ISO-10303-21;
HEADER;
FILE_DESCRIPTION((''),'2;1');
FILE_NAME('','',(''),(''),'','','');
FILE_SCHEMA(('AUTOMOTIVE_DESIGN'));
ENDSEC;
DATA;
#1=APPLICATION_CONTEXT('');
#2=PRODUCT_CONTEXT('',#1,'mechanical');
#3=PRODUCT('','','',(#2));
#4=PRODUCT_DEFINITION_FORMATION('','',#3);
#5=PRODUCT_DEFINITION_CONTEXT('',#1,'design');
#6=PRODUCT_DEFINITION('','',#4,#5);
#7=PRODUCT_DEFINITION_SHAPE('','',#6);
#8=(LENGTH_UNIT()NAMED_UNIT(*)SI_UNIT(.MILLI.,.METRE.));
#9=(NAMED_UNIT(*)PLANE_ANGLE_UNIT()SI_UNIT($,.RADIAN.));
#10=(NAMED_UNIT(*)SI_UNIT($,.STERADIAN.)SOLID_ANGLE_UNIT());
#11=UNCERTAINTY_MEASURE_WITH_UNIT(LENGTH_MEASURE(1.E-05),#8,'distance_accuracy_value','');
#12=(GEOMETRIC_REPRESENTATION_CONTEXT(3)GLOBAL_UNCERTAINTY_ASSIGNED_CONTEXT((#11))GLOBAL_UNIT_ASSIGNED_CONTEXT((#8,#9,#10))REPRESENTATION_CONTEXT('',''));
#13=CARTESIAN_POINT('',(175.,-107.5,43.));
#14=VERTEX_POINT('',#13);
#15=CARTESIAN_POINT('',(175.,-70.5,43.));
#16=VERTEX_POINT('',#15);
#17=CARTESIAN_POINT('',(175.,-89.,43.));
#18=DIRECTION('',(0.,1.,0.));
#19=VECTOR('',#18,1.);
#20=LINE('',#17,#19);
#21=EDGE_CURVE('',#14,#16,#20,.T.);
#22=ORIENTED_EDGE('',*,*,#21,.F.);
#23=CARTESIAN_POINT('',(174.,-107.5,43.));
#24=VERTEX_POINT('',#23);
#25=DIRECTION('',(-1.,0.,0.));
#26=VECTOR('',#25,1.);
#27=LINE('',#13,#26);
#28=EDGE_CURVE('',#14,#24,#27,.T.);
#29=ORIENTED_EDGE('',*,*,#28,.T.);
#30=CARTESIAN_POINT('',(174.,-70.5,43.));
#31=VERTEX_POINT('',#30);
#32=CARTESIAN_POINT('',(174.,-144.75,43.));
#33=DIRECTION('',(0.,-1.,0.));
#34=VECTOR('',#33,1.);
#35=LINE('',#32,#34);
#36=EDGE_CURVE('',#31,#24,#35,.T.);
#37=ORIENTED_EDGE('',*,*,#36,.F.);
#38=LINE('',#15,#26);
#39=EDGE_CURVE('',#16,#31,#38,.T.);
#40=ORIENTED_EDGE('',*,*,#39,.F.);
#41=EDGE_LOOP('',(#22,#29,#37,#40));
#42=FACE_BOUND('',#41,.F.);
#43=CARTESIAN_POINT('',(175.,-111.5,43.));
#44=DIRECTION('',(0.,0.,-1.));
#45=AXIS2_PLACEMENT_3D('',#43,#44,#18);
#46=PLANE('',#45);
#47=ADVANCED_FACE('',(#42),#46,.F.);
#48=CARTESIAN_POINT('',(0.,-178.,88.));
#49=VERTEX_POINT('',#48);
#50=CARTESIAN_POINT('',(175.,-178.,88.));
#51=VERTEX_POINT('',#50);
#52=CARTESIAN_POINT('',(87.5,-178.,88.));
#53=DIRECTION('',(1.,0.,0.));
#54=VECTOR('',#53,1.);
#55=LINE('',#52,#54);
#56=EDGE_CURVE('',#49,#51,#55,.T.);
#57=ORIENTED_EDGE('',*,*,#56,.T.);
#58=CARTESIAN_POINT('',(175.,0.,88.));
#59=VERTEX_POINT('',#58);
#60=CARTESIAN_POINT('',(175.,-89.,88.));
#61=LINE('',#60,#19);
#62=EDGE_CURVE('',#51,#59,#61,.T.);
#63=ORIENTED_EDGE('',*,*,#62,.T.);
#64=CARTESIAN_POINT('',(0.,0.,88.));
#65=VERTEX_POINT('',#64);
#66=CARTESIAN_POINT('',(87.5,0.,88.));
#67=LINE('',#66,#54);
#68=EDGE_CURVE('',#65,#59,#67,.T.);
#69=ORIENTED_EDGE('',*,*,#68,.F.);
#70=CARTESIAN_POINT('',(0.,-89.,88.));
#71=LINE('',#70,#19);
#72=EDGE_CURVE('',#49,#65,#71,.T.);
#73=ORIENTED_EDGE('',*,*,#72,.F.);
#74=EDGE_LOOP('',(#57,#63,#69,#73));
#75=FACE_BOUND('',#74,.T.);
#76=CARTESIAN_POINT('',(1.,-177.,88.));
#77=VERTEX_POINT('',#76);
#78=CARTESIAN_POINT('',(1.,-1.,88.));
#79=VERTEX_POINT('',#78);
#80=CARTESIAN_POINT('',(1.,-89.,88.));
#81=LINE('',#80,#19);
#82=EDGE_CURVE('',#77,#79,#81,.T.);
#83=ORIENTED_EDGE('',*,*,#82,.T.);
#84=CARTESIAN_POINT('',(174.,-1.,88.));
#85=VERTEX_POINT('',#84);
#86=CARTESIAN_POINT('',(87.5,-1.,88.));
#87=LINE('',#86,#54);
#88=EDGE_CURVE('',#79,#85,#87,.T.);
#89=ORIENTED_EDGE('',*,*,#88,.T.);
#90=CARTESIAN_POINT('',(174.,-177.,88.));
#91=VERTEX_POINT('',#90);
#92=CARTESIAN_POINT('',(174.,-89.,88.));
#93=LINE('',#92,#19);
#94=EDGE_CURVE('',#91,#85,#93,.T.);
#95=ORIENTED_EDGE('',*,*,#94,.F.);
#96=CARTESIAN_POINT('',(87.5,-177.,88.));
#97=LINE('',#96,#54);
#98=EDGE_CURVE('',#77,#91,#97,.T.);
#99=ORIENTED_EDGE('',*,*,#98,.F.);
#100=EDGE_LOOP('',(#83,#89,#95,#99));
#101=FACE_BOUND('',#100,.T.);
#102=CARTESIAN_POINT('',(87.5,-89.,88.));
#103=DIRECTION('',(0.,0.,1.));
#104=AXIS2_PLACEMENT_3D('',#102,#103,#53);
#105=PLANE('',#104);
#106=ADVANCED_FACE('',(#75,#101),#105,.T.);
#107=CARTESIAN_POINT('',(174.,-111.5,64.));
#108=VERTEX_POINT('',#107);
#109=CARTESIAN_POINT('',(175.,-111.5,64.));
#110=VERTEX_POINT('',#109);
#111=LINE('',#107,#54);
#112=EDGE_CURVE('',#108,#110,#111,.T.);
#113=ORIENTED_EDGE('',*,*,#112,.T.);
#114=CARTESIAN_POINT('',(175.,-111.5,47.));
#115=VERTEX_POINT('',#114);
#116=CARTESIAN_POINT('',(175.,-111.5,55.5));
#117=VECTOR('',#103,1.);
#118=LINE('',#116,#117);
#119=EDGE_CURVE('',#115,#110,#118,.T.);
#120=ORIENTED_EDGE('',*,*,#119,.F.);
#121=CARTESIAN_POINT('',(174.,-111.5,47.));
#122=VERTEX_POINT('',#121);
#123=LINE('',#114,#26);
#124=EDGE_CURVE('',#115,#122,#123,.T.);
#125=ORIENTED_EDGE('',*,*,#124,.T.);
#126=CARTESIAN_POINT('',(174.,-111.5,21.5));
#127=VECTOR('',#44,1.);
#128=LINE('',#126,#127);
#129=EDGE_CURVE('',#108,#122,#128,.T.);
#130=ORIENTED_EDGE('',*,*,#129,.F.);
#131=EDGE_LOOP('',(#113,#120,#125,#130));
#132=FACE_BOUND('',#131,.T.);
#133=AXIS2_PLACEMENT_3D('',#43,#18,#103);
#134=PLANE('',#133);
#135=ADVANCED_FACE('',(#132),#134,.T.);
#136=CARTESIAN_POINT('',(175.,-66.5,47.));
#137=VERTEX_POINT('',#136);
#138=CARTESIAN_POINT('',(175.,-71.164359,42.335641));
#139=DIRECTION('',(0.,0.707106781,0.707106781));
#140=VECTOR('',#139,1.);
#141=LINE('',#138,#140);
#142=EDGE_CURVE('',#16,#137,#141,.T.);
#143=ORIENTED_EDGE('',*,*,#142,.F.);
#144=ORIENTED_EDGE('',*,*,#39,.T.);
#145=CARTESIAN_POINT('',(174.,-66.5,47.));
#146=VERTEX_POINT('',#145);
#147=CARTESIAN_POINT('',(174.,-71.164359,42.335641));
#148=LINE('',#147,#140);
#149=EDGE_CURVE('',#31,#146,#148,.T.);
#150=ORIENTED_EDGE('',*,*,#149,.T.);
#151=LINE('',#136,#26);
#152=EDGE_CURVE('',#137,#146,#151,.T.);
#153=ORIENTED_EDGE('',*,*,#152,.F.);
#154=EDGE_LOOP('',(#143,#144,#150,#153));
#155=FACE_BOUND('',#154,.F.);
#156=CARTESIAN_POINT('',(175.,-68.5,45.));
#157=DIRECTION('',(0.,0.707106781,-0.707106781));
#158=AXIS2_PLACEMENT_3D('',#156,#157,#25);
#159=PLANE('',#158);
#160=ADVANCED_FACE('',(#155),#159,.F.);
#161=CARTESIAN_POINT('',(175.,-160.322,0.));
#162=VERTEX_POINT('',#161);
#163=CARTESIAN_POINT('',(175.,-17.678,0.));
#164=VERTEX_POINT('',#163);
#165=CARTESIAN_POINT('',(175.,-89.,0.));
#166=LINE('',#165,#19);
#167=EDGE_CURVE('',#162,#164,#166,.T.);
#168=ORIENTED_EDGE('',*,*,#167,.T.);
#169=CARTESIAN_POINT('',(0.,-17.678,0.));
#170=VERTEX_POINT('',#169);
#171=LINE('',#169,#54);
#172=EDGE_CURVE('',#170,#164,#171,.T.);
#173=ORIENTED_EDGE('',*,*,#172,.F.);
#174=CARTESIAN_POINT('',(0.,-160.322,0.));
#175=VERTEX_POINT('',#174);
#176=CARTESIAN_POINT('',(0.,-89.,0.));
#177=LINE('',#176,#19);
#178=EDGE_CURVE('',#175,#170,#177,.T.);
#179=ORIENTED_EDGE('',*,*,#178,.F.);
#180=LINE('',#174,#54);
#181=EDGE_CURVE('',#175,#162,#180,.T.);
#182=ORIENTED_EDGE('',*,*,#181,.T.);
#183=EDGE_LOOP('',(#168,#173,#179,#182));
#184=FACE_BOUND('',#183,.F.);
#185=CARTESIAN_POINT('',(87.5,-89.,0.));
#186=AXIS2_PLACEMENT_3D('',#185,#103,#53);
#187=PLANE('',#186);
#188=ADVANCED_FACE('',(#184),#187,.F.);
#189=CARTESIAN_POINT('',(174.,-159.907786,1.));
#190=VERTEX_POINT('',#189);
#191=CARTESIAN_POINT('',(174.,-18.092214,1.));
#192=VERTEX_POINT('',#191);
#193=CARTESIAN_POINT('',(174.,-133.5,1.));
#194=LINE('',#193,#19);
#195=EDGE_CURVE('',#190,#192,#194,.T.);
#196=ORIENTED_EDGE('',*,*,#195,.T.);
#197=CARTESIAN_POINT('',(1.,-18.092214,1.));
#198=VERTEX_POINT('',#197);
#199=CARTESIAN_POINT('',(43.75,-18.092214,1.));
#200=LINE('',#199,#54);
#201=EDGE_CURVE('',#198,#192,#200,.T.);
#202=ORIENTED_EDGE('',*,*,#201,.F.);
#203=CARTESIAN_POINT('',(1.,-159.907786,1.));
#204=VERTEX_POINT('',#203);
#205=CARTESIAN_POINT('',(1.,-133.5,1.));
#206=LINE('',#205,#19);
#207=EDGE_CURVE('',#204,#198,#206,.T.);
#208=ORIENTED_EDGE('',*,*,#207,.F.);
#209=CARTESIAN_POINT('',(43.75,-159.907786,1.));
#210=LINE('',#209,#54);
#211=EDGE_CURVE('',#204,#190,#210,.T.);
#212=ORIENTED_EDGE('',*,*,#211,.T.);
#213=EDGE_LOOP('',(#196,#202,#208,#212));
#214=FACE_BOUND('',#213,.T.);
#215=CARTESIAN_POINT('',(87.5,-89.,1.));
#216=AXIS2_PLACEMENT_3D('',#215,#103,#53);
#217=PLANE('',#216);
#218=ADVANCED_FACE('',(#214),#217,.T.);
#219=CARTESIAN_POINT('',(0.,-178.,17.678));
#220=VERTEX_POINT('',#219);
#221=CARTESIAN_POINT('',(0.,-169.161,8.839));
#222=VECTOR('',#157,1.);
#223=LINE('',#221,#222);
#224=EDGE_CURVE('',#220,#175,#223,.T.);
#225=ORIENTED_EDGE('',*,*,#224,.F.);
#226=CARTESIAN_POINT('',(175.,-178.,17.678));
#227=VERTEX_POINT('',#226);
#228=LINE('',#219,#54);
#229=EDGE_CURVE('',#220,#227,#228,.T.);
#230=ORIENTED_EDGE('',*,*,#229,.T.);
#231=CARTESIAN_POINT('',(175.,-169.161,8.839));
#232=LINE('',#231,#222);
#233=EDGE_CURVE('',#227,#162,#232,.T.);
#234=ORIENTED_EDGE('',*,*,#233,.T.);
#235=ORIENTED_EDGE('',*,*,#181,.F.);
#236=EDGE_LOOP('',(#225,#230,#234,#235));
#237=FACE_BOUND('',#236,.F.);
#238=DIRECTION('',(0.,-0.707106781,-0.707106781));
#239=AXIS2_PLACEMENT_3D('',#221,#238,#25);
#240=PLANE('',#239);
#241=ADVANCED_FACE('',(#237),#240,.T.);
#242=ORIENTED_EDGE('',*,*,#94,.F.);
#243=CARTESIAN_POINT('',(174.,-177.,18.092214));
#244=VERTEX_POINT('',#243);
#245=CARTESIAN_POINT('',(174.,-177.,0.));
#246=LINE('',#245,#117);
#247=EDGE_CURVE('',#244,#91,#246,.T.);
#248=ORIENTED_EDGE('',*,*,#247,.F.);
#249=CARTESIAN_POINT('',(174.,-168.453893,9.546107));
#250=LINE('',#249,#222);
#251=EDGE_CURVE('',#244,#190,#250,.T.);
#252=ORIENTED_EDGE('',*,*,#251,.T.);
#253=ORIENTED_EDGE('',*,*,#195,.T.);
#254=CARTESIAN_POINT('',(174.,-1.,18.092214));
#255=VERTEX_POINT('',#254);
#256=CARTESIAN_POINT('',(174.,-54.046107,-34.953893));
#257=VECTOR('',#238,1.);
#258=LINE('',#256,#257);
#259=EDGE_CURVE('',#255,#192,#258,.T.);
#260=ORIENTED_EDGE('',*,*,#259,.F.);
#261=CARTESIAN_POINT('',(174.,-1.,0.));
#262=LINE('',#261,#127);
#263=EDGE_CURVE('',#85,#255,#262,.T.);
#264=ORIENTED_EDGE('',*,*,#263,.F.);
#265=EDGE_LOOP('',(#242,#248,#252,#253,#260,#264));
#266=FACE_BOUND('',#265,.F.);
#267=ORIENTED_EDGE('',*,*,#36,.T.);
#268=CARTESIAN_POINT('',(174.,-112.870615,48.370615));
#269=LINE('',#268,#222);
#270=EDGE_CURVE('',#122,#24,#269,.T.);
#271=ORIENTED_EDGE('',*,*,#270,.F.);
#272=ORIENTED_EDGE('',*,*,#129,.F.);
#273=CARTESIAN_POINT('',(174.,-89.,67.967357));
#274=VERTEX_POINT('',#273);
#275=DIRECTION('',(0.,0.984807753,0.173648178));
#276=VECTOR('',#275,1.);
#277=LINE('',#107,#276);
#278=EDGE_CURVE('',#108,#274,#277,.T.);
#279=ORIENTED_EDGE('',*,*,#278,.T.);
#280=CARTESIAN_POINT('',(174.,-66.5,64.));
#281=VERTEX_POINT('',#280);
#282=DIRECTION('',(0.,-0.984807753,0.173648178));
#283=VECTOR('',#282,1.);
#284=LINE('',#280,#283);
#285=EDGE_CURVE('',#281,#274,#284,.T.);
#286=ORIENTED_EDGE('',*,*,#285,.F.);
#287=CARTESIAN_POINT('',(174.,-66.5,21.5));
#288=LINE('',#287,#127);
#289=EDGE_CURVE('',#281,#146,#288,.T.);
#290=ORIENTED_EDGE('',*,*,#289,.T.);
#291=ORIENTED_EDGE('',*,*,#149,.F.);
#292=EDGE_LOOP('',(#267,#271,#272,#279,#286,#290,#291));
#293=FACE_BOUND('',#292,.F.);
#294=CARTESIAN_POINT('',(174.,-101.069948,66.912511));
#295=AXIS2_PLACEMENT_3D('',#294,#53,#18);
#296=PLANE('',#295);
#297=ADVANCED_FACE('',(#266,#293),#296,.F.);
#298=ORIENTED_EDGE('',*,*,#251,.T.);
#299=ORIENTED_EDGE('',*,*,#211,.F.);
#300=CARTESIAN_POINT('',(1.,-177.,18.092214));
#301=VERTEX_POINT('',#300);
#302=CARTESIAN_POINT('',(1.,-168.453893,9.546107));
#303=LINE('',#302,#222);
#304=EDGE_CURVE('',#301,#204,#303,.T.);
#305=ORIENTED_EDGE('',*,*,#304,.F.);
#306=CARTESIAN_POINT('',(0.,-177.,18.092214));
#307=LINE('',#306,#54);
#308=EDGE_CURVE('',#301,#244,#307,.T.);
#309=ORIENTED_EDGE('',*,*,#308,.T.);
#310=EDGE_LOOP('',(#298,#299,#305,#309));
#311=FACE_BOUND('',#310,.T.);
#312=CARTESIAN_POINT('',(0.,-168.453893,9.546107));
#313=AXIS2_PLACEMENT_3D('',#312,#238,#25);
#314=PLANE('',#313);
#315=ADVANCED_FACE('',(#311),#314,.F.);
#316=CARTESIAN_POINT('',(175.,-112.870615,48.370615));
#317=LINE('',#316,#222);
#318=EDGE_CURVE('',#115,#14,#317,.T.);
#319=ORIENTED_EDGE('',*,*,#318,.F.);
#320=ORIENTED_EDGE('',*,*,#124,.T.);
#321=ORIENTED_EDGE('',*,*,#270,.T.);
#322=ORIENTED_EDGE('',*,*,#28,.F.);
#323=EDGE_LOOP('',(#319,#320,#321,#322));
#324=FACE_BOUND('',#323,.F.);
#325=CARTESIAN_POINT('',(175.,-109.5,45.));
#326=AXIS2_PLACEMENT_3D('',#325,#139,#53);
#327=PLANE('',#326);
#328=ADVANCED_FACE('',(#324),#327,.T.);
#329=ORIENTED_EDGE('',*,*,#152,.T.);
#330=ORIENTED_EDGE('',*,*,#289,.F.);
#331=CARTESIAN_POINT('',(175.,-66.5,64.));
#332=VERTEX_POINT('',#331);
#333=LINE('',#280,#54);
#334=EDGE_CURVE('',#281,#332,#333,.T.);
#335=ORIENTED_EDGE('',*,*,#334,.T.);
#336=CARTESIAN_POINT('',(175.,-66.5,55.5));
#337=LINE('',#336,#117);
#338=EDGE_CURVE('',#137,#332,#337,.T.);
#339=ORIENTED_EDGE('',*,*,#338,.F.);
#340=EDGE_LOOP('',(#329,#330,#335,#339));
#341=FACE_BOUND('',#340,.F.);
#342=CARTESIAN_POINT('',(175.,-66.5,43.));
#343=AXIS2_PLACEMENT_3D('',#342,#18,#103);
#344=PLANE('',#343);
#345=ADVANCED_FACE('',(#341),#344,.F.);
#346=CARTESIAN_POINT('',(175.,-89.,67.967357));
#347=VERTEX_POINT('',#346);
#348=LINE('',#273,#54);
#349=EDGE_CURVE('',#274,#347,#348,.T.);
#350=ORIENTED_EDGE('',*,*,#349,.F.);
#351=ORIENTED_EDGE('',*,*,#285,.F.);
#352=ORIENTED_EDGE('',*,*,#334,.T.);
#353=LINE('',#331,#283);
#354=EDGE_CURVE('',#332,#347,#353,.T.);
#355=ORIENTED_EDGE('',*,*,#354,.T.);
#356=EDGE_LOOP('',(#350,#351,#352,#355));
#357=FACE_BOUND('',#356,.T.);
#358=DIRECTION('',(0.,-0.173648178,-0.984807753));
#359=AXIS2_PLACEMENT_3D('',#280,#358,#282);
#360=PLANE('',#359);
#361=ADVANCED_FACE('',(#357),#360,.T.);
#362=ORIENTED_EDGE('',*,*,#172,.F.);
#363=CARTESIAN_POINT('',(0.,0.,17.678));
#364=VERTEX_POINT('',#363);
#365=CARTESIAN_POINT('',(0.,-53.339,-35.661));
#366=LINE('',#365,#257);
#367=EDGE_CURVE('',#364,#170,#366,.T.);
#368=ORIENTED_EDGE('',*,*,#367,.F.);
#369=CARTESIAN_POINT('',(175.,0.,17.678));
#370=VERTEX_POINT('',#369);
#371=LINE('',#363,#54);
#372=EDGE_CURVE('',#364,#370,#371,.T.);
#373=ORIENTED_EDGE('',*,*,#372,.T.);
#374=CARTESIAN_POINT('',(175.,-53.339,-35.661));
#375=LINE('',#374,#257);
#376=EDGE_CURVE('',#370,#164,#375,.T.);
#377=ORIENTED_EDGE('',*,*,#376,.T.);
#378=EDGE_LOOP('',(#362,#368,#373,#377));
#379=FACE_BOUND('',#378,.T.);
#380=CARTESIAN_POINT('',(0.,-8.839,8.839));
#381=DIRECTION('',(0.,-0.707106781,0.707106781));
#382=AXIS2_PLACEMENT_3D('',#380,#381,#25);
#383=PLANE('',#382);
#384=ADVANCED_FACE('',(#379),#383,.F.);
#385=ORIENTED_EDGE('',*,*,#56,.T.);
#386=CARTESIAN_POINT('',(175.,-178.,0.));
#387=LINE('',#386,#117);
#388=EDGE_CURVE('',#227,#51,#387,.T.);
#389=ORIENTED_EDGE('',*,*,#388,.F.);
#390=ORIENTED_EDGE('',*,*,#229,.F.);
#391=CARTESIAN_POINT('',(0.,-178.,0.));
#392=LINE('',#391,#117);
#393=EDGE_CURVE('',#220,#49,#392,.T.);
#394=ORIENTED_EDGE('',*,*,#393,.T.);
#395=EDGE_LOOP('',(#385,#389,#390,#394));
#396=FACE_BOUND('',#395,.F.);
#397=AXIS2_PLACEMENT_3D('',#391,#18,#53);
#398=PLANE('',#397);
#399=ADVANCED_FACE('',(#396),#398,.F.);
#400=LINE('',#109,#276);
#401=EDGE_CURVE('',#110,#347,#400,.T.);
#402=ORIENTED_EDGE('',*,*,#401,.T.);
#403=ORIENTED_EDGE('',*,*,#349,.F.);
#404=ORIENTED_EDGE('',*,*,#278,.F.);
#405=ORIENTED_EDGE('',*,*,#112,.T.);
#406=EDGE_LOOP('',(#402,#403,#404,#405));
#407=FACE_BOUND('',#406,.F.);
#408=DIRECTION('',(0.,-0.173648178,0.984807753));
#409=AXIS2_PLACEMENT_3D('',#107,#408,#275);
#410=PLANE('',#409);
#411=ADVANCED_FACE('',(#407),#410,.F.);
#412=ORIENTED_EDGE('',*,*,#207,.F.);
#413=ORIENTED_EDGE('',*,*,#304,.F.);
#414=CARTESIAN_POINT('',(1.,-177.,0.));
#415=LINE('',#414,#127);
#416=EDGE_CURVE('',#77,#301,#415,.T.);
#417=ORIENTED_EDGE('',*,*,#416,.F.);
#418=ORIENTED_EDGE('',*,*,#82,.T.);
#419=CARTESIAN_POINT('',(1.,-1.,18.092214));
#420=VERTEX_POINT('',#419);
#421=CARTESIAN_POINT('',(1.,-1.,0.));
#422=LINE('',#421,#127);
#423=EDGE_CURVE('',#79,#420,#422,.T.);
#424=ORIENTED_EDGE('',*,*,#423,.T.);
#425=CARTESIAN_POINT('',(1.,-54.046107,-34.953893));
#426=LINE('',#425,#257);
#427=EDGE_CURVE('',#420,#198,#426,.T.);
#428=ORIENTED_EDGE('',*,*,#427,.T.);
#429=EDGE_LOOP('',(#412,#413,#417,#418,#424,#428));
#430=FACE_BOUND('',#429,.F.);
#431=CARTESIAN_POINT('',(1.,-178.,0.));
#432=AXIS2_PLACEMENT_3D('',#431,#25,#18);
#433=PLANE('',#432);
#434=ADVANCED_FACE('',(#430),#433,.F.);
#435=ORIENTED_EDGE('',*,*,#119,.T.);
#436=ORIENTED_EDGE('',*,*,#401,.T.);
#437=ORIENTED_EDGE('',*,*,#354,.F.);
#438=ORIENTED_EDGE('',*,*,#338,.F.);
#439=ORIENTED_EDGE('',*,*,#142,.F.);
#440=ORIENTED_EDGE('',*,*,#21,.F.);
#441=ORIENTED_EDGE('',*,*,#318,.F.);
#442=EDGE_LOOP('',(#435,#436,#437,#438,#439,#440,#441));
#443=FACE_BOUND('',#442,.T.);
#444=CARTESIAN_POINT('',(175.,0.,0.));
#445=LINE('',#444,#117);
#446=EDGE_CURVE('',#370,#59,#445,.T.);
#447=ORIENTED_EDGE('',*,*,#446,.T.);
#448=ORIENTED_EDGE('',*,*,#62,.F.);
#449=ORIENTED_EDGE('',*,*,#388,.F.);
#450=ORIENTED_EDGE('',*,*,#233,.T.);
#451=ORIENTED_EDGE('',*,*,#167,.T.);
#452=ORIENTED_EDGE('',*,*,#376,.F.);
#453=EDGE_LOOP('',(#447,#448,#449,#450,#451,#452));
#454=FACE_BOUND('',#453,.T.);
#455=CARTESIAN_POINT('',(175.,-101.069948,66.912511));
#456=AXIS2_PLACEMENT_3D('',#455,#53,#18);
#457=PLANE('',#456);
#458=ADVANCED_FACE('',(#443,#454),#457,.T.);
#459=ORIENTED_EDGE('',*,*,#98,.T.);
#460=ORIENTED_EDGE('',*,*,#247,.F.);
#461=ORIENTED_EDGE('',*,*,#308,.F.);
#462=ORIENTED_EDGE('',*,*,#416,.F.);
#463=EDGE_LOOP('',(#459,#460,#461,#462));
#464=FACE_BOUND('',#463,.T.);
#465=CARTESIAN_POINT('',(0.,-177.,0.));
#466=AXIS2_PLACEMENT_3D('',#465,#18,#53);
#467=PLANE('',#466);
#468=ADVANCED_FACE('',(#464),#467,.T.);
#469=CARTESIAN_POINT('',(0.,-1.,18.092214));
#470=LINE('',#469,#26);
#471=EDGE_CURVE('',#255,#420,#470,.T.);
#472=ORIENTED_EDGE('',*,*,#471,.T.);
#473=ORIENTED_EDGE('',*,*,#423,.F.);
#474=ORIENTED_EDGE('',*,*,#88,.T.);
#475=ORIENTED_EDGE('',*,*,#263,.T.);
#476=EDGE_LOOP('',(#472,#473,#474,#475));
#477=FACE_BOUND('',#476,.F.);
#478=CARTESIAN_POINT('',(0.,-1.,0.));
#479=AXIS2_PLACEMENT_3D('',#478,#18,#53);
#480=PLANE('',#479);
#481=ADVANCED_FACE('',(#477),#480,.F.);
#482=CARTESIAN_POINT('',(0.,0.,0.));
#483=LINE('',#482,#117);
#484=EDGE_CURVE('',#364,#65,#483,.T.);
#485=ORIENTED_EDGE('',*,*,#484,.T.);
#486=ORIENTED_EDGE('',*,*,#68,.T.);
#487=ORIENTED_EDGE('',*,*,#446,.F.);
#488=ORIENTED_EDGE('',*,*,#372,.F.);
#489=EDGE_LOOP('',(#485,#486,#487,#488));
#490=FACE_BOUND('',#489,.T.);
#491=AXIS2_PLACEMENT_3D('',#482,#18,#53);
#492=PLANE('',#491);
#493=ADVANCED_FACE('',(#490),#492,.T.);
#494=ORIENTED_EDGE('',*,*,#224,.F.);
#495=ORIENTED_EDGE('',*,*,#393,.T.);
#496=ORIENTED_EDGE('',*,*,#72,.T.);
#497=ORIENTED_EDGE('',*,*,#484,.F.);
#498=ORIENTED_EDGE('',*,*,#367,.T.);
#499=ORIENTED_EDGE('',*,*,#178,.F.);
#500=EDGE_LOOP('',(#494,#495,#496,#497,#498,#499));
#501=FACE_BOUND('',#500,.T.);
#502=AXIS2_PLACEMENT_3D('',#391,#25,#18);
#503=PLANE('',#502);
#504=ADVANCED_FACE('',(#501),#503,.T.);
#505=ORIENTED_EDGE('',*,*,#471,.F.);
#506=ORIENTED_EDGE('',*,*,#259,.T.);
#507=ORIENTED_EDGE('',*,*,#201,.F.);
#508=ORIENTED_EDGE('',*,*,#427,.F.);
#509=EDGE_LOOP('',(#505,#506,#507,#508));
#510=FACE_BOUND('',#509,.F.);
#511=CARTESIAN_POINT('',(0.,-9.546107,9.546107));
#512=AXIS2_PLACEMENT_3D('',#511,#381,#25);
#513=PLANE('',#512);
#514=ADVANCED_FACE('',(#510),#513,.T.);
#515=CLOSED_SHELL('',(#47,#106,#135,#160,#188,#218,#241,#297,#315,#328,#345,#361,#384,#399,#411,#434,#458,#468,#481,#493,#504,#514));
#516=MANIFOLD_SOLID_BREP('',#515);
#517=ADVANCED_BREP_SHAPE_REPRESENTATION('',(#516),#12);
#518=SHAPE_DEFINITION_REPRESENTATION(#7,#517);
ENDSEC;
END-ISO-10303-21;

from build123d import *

# Parameters (mm, degrees)
F0_W        = 175
F0_H        = 178
F1_DEPTH    = 88
F2_SIZE     = 17.678
F3_T        = -1
F4_W        = 45
F4_H        = 25
F5_DEPTH    = 2
F6_T1_DEPTH = 1
F7_SIZE     = 4


# Not quite as in the source:
# - a fillet or chamfer that OpenCascade refuses, or shapes differently, is made with other operations: its cross-section is extruded or revolved along the edge and cut away or added


with BuildPart() as f1:
    # F0 (on Top) → F1 (new body)
    with BuildSketch(Plane.XY):
        with Locations((87.5, -89)):
            Rectangle(F0_W, F0_H)
    extrude(amount=F1_DEPTH)

    # F2
    f2_edges = [f1.edges().sort_by_distance(p)[0] for p in [
        (87.5, -178, 0),
        (87.5, 0, 0),
    ]]
    chamfer(f2_edges, length=F2_SIZE)

    # F3
    f3_openings = [f1.faces().sort_by_distance(p)[0] for p in [
        (87.5, -89, 88),
    ]]
    offset(amount=F3_T, openings=f3_openings)

    # F4 (on face) → F5 (cut)
    with BuildSketch(Plane.YZ.offset(175)):
        with Locations((-89, 55.5)):
            Rectangle(F4_W, F4_H)
    extrude(amount=-F5_DEPTH, mode=Mode.SUBTRACT)

    # F6: chamfer of 4 x 22.6851272785 on 2 edges, made by hand

    # F6_s2 → F6_t1 (join)
    with BuildSketch(Plane.YZ.offset(174)):
        Polygon((-111.5, 64), (-88.8148727215, 68), (-111.5, 68), align=None)
        Polygon((-66.5, 64), (-89.1851272785, 68), (-66.5, 68), align=None)
    extrude(amount=F6_T1_DEPTH)

    # F7
    f7_edges = [f1.edges().sort_by_distance(p)[0] for p in [
        (174.5, -111.5, 43),
        (174.5, -66.5, 43),
    ]]
    chamfer(f7_edges, length=F7_SIZE)


solid = f1.part
